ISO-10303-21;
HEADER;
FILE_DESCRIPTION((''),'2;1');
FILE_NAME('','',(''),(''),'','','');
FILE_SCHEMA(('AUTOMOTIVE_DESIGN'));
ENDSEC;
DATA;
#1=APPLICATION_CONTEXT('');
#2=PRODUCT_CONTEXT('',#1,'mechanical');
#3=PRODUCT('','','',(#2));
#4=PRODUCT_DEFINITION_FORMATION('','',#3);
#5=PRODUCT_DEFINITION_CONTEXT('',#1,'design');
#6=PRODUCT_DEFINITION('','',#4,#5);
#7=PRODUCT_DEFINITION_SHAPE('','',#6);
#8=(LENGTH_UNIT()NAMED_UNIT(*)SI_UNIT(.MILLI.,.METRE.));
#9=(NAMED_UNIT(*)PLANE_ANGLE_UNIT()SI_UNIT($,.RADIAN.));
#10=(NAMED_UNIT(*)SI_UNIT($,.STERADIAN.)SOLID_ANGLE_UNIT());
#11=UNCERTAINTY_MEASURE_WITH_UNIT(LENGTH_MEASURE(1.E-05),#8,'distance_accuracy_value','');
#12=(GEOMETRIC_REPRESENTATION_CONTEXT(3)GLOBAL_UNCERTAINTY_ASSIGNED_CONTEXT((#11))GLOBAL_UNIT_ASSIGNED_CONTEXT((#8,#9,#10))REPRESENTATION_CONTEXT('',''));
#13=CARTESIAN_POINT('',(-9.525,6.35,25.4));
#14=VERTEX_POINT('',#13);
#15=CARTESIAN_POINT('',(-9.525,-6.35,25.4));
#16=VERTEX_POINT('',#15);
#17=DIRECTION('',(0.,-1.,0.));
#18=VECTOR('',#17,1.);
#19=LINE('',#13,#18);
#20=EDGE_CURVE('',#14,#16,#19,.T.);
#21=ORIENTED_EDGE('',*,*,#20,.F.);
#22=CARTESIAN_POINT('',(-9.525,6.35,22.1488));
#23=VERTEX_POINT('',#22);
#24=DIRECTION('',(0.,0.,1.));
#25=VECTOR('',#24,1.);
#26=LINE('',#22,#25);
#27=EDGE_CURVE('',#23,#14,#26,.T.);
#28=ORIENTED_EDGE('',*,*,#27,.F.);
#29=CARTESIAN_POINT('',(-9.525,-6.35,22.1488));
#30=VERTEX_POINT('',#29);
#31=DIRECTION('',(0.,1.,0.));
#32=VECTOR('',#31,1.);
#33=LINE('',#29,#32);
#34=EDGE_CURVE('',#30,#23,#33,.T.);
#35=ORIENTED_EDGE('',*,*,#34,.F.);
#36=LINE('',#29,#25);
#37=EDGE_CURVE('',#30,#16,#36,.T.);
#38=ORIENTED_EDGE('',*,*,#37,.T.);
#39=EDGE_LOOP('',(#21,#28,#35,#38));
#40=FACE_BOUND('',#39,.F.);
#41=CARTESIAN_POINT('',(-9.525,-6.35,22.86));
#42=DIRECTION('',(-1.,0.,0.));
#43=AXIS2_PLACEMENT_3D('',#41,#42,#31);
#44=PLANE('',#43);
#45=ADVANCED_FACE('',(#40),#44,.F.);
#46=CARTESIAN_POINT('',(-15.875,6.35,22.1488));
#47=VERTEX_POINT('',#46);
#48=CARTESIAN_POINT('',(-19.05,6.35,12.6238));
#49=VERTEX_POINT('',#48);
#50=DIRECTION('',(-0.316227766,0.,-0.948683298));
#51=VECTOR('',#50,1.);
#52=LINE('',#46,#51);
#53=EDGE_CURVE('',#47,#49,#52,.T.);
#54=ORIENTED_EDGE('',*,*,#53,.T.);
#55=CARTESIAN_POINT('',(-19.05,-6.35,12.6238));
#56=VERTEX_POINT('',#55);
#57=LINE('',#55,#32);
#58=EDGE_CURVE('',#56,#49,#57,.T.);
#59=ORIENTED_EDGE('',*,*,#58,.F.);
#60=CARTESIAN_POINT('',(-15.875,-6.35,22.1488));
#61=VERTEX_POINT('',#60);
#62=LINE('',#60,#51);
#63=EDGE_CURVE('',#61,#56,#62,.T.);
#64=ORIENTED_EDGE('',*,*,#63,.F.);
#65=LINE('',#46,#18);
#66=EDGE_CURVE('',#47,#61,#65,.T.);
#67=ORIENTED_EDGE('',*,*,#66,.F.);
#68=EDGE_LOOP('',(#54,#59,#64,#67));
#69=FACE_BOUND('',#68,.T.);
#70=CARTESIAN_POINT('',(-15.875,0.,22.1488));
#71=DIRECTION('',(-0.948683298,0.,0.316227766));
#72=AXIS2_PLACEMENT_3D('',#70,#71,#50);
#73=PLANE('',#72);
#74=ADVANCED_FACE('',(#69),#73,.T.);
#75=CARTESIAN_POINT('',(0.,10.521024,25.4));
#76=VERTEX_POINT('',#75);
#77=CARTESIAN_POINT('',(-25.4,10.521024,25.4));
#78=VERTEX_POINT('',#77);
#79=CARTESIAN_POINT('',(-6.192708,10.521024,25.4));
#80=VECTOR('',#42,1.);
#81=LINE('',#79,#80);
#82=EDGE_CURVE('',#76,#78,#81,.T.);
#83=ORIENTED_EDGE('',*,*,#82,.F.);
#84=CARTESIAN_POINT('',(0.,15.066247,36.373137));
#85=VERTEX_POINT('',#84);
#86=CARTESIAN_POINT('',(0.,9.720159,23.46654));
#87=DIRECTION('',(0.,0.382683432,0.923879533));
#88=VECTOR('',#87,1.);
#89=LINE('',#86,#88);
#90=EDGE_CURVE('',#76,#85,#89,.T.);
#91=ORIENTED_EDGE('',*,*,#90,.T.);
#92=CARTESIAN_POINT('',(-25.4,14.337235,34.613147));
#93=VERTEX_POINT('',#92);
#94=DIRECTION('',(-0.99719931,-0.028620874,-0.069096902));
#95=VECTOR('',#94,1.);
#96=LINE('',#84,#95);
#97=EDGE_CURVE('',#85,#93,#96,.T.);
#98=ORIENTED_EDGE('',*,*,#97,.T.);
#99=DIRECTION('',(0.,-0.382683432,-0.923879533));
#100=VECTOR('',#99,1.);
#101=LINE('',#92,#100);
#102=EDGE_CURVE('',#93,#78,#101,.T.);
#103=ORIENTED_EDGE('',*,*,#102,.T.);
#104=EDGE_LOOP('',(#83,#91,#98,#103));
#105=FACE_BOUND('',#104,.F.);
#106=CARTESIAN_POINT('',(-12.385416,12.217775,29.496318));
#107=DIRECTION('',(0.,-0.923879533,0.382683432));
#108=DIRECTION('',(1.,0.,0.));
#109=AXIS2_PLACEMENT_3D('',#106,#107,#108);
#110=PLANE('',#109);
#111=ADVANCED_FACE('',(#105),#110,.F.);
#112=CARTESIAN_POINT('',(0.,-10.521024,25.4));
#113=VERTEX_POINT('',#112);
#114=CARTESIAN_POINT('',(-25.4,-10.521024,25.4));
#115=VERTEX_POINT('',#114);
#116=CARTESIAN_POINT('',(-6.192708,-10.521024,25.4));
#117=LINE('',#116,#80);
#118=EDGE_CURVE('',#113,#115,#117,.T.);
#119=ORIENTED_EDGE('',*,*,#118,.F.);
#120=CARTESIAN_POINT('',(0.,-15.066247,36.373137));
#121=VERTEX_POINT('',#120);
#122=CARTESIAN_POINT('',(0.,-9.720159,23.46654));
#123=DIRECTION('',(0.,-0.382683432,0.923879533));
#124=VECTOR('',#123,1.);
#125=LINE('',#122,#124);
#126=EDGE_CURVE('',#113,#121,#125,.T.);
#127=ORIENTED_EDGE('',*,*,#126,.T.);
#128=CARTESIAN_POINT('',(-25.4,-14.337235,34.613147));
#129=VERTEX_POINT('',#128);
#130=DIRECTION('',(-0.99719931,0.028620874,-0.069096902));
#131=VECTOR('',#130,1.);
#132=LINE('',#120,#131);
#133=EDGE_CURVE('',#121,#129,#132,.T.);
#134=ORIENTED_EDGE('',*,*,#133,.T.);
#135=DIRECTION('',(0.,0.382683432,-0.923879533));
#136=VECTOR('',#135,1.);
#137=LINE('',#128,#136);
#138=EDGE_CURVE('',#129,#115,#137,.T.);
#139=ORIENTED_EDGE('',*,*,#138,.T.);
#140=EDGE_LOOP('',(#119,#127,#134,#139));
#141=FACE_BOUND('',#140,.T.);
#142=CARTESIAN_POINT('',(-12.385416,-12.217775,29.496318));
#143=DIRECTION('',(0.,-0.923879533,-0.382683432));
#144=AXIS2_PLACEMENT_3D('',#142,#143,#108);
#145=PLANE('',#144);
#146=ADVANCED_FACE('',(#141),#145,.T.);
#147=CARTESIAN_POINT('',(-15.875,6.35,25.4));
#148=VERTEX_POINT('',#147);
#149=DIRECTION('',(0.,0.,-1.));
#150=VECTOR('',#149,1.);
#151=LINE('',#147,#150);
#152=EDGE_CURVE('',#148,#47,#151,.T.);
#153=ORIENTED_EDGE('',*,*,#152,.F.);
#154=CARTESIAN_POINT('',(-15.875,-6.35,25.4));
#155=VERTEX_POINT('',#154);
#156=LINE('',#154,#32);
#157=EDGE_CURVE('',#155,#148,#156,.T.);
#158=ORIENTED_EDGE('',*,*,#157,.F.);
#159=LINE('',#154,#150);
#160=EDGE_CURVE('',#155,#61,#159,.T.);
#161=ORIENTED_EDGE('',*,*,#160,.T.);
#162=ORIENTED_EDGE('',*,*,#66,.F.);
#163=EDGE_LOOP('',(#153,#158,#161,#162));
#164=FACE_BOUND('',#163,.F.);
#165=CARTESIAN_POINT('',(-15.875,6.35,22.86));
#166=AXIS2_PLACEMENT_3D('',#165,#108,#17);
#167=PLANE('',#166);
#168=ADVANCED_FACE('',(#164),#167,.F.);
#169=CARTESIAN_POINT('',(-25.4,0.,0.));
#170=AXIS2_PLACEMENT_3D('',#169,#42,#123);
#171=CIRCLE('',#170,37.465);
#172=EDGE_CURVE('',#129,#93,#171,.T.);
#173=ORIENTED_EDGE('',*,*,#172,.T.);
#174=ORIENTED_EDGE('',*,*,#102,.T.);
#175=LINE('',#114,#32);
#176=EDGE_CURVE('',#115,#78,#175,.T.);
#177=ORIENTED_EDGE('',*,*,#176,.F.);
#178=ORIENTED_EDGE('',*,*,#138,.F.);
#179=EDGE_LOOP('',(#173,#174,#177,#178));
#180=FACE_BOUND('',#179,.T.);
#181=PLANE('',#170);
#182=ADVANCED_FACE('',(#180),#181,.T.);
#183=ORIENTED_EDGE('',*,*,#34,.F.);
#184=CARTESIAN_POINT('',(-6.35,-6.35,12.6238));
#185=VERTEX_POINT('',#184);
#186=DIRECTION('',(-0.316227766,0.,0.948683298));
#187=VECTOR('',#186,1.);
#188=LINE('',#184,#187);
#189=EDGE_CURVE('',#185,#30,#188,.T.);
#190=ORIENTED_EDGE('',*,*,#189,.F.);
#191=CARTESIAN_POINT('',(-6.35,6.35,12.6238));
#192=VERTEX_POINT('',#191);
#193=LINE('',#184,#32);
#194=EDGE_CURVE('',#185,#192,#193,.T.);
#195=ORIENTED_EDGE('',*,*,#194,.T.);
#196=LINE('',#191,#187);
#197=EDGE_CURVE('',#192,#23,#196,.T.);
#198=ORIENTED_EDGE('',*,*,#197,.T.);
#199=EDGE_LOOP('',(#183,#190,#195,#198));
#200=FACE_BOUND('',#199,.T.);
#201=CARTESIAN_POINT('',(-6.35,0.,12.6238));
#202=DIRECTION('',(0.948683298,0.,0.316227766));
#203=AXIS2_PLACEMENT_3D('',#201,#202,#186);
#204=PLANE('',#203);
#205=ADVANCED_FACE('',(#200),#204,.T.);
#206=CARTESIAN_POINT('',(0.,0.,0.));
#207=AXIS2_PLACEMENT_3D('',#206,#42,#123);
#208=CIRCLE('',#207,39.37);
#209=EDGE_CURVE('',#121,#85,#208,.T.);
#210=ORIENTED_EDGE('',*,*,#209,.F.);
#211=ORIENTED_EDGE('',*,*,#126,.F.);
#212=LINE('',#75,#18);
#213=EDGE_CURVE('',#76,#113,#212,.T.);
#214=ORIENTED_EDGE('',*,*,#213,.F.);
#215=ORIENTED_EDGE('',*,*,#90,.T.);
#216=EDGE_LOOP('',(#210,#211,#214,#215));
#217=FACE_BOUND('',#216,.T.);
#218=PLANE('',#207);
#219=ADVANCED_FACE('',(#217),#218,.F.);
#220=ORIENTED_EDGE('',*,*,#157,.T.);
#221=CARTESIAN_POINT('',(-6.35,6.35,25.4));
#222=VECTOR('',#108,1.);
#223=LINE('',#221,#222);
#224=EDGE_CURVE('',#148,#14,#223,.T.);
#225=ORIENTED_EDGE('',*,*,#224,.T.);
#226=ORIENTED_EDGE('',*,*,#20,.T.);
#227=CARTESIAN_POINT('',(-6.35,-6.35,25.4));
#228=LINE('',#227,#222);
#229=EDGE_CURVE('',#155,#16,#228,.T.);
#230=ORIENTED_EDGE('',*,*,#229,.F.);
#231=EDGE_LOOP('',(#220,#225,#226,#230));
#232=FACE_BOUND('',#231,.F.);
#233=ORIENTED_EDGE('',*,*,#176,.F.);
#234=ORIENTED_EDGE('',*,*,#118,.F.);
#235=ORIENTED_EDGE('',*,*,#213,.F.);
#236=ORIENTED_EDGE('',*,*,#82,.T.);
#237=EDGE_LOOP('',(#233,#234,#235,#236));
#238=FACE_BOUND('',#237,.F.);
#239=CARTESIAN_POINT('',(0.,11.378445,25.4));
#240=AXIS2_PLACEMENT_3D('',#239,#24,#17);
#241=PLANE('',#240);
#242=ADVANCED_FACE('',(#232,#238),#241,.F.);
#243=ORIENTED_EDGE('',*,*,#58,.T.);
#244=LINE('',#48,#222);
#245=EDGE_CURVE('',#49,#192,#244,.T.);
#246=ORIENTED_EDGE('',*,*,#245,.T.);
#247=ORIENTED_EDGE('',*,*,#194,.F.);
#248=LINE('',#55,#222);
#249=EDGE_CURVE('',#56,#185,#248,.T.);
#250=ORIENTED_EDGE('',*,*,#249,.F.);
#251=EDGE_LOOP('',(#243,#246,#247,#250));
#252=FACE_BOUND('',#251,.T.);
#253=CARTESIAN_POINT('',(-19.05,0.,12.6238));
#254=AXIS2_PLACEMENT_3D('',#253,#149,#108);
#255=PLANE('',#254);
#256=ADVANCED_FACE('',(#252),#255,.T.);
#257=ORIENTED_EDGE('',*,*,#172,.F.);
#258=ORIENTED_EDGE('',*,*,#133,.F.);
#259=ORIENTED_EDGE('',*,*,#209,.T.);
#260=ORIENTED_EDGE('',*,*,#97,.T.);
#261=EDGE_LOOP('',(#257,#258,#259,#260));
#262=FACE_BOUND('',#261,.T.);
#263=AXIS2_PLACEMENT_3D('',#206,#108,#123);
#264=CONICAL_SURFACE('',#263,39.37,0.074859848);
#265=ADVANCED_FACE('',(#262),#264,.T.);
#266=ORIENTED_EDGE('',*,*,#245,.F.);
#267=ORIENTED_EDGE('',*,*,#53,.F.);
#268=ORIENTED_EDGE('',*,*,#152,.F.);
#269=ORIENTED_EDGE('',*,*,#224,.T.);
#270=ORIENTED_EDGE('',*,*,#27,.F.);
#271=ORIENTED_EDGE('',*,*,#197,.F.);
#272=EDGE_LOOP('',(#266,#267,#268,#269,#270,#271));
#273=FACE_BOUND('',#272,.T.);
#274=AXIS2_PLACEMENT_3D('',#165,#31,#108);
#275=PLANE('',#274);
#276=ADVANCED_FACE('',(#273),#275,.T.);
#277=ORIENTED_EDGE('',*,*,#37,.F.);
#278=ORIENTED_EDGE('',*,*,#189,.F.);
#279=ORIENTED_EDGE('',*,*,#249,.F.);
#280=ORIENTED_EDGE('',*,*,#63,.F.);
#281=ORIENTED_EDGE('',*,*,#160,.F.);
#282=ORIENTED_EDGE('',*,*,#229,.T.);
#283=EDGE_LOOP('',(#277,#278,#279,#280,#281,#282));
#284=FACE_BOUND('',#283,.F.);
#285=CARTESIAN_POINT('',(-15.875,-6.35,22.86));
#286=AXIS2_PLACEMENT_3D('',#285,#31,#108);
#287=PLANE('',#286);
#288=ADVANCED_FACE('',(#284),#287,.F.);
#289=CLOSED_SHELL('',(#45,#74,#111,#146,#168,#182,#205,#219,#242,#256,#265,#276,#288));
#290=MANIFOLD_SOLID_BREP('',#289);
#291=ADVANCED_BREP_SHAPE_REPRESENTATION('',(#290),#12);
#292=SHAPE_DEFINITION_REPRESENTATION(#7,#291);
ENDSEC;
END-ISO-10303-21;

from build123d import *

# Parameters (mm, degrees)
F1_DEPTH      = 6.35
F2_ANGLE_BACK = 22.5
F2_ANGLE      = 45
F4_DEPTH      = 25.401
F5_DEPTH      = 2.54


with BuildPart() as f1:
    # F0 (on Front) → F1 (new body, symmetric)
    with BuildSketch(Plane.XZ):
        Polygon((-9.525, 22.1488), (-9.525, 25.4), (-15.875, 25.4), (-15.875, 22.1488), (-19.05, 12.6238), (-6.35, 12.6238), align=None)
    extrude(amount=F1_DEPTH, both=True)

    # F0 (on Front) → F2 (revolve)
    with BuildSketch(Plane.XZ, mode=Mode.PRIVATE) as f2_sk:
        Polygon((-9.525, 25.4), (0, 25.4), (0, 39.37), (-25.4, 37.465), (-25.4, 25.4), (-15.875, 25.4), align=None)
    revolve(f2_sk.sketch.rotate(Axis((-30.5623934027, 0, 0), (-1, 0, 0)), -F2_ANGLE_BACK), axis=Axis((-30.5623934027, 0, 0), (-1, 0, 0)), revolution_arc=F2_ANGLE)

    # F3 (on face) → F4 (cut, through all)
    with BuildSketch(Plane.YZ):
        with BuildLine():
            Line((11.3784447312, 25.4), (10.5210244843, 25.4))
            Line((10.5210244843, 25.4), (9.7201591821, 23.4665401258))
            ThreePointArc((9.7201591821, 23.4665401258), (4.9552941792, 24.9119461222), (0, 25.4))
            Line((0, 25.4), (0, 22.86))
            Line((0, 22.86), (11.3784447312, 22.86))
            Line((11.3784447312, 22.86), (11.3784447312, 25.4))
        make_face()
        with BuildLine():
            Line((9.7201591821, 23.4665401258), (10.5210244843, 25.4))
            Line((10.5210244843, 25.4), (0, 25.4))
            ThreePointArc((0, 25.4), (4.9552941792, 24.9119461222), (9.7201591821, 23.4665401258))
        make_face()
        with BuildLine():
            Line((0, 22.86), (0, 25.4))
            ThreePointArc((0, 25.4), (-4.9552941792, 24.9119461222), (-9.7201591821, 23.4665401258))
            Line((-9.7201591821, 23.4665401258), (-10.5210244843, 25.4))
            Line((-10.5210244843, 25.4), (-11.5035856143, 25.4))
            Line((-11.5035856143, 25.4), (-11.5035856143, 22.86))
            Line((-11.5035856143, 22.86), (0, 22.86))
        make_face()
        with BuildLine():
            ThreePointArc((-9.7201591821, 23.4665401258), (-4.9552941792, 24.9119461222), (0, 25.4))
            Line((0, 25.4), (-10.5210244843, 25.4))
            Line((-10.5210244843, 25.4), (-9.7201591821, 23.4665401258))
        make_face()
    extrude(amount=-F4_DEPTH, mode=Mode.SUBTRACT)

    # F5 (add, through all): a face of the model
    f5_faces = [f1.faces().sort_by_distance(p)[0] for p in [
        (-12.7, 0, 22.86),
    ]]
    extrude(f5_faces, amount=F5_DEPTH)


solid = f1.part
